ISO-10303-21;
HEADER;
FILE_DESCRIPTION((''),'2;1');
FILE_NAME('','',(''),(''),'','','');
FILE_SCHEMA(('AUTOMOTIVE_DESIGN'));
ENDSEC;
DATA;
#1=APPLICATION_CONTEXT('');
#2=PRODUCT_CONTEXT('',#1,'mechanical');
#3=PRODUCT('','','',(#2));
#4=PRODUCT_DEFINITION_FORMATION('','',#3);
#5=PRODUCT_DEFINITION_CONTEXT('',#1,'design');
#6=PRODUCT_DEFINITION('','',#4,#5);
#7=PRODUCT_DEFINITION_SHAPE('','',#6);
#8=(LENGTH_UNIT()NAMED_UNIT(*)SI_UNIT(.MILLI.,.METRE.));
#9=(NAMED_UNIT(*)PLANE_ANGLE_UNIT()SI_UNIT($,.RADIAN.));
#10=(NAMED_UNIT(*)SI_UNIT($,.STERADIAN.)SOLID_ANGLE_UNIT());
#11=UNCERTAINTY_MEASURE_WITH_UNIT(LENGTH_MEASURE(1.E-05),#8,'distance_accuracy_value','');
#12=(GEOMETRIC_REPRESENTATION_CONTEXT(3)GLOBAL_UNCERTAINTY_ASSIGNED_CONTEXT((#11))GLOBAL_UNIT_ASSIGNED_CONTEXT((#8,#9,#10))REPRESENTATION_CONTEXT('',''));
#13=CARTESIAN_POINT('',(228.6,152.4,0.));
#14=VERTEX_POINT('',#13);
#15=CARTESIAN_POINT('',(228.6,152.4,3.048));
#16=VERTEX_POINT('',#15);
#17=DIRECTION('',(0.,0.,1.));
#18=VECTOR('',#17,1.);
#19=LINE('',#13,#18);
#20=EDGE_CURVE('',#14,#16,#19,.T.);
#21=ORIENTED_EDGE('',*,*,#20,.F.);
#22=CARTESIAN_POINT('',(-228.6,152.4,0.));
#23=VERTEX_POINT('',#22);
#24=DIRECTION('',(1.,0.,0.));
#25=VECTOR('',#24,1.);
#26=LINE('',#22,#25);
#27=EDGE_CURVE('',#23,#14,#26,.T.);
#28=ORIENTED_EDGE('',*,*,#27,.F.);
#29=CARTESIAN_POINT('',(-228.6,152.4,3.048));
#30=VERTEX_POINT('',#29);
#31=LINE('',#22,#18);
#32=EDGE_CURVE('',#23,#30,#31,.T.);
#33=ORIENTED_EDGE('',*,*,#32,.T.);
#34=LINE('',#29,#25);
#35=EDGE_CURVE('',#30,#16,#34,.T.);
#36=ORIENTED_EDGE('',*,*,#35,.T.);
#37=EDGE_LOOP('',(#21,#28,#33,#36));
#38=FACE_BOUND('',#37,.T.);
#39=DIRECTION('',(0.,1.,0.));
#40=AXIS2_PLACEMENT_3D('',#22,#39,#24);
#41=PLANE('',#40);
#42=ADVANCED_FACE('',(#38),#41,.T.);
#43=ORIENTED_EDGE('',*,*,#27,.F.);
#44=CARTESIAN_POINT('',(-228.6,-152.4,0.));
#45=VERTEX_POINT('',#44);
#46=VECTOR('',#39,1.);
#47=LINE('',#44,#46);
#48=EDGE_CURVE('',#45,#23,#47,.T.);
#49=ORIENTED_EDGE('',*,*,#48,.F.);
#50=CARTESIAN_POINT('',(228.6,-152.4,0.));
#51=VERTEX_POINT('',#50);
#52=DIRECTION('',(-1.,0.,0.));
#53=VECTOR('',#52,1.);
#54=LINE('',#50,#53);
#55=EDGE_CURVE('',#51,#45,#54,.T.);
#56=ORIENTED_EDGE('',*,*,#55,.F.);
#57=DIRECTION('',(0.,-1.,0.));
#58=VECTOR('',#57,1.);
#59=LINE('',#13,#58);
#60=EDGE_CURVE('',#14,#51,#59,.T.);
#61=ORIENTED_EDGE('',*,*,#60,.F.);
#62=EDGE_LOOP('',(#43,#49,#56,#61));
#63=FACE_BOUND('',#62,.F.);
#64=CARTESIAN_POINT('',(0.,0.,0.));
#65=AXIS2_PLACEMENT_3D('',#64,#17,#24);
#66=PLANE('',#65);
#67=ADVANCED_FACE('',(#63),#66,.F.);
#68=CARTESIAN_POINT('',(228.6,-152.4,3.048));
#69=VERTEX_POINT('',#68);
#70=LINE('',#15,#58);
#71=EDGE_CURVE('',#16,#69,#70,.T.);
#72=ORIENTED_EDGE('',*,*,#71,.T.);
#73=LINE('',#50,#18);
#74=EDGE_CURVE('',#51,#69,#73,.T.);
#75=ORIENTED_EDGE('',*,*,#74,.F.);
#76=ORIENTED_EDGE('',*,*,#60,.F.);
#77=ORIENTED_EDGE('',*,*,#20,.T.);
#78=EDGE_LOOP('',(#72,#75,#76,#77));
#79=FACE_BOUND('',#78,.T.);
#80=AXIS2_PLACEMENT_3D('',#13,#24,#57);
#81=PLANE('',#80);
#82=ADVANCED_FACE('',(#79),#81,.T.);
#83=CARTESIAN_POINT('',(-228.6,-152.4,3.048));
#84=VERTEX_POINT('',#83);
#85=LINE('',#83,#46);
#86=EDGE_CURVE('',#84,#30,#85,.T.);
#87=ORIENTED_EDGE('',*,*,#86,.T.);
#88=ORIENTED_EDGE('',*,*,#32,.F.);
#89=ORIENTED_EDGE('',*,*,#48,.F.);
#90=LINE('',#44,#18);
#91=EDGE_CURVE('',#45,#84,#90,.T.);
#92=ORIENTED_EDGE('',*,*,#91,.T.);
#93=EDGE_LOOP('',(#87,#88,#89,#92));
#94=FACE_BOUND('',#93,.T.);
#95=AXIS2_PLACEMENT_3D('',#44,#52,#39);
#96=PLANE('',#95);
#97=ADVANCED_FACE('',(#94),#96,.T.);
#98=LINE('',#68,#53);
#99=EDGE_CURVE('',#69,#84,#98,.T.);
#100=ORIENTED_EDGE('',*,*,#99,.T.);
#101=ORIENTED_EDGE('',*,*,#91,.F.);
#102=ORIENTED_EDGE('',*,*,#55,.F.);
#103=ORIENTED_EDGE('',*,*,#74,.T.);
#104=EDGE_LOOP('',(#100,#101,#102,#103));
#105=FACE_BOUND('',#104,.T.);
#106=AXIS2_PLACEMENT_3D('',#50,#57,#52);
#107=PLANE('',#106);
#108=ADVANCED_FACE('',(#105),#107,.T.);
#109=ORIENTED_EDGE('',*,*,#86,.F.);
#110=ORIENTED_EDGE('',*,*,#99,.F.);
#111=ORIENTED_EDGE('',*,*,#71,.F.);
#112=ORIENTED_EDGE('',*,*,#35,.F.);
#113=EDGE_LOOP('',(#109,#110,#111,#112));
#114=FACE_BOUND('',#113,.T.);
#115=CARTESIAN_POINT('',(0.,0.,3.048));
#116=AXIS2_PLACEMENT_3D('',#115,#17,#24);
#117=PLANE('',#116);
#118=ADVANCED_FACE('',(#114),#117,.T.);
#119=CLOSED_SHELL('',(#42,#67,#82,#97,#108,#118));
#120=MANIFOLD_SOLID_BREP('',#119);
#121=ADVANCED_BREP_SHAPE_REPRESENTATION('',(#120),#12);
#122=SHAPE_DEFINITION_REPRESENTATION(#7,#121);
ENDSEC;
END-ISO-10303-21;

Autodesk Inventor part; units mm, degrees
ref_plane "YZ Plane" through (0, 0, 0) normal (1, 0, 0) x (0, 1, 0)
ref_plane "XZ Plane" through (0, 0, 0) normal (0, 1, 0) x (-1, 0, 0)
ref_plane "XY Plane" through (0, 0, 0) normal (0, 0, 1) x (1, 0, 0)
sketch "Sketch1" plane through (0, 0, 0) normal (0, 0, 1) x (1, 0, 0)
  line L0 (0, 118.1576) -> (0, 0)
  line L1 (0, 0) -> (122.0636, 0)
  line L2 (-228.6, 152.4) -> (228.6, 152.4)
  line L3 (228.6, 152.4) -> (228.6, -152.4)
  line L4 (228.6, -152.4) -> (-228.6, -152.4)
  line L5 (-228.6, -152.4) -> (-228.6, 152.4)
  dimension "d0" = 457.2
  dimension "d1" = 304.8
extrude "Plate1" add sketch "Sketch1" along normal blind 3.048
equation "\"BendRadius\" = Thickness"
equation "\"BendReliefWidth\" = Thickness"
equation "\"BendReliefDepth\" = 0.5 * Thickness"
equation "\"CornerReliefSize\" = 4 * Thickness"
equation "\"MinimumRemnant\" = 2 * Thickness"
equation "\"TransitionRadius\" = BendRadius"
equation "\"JacobiRadiusSize\" = BendRadius"
equation "\"GapSize\" = Thickness"
equation "\"d2\" = BendRadius"
equation "\"Thickness\" = 3.048"
properties part number "Fotofab_panel_16x12in"
